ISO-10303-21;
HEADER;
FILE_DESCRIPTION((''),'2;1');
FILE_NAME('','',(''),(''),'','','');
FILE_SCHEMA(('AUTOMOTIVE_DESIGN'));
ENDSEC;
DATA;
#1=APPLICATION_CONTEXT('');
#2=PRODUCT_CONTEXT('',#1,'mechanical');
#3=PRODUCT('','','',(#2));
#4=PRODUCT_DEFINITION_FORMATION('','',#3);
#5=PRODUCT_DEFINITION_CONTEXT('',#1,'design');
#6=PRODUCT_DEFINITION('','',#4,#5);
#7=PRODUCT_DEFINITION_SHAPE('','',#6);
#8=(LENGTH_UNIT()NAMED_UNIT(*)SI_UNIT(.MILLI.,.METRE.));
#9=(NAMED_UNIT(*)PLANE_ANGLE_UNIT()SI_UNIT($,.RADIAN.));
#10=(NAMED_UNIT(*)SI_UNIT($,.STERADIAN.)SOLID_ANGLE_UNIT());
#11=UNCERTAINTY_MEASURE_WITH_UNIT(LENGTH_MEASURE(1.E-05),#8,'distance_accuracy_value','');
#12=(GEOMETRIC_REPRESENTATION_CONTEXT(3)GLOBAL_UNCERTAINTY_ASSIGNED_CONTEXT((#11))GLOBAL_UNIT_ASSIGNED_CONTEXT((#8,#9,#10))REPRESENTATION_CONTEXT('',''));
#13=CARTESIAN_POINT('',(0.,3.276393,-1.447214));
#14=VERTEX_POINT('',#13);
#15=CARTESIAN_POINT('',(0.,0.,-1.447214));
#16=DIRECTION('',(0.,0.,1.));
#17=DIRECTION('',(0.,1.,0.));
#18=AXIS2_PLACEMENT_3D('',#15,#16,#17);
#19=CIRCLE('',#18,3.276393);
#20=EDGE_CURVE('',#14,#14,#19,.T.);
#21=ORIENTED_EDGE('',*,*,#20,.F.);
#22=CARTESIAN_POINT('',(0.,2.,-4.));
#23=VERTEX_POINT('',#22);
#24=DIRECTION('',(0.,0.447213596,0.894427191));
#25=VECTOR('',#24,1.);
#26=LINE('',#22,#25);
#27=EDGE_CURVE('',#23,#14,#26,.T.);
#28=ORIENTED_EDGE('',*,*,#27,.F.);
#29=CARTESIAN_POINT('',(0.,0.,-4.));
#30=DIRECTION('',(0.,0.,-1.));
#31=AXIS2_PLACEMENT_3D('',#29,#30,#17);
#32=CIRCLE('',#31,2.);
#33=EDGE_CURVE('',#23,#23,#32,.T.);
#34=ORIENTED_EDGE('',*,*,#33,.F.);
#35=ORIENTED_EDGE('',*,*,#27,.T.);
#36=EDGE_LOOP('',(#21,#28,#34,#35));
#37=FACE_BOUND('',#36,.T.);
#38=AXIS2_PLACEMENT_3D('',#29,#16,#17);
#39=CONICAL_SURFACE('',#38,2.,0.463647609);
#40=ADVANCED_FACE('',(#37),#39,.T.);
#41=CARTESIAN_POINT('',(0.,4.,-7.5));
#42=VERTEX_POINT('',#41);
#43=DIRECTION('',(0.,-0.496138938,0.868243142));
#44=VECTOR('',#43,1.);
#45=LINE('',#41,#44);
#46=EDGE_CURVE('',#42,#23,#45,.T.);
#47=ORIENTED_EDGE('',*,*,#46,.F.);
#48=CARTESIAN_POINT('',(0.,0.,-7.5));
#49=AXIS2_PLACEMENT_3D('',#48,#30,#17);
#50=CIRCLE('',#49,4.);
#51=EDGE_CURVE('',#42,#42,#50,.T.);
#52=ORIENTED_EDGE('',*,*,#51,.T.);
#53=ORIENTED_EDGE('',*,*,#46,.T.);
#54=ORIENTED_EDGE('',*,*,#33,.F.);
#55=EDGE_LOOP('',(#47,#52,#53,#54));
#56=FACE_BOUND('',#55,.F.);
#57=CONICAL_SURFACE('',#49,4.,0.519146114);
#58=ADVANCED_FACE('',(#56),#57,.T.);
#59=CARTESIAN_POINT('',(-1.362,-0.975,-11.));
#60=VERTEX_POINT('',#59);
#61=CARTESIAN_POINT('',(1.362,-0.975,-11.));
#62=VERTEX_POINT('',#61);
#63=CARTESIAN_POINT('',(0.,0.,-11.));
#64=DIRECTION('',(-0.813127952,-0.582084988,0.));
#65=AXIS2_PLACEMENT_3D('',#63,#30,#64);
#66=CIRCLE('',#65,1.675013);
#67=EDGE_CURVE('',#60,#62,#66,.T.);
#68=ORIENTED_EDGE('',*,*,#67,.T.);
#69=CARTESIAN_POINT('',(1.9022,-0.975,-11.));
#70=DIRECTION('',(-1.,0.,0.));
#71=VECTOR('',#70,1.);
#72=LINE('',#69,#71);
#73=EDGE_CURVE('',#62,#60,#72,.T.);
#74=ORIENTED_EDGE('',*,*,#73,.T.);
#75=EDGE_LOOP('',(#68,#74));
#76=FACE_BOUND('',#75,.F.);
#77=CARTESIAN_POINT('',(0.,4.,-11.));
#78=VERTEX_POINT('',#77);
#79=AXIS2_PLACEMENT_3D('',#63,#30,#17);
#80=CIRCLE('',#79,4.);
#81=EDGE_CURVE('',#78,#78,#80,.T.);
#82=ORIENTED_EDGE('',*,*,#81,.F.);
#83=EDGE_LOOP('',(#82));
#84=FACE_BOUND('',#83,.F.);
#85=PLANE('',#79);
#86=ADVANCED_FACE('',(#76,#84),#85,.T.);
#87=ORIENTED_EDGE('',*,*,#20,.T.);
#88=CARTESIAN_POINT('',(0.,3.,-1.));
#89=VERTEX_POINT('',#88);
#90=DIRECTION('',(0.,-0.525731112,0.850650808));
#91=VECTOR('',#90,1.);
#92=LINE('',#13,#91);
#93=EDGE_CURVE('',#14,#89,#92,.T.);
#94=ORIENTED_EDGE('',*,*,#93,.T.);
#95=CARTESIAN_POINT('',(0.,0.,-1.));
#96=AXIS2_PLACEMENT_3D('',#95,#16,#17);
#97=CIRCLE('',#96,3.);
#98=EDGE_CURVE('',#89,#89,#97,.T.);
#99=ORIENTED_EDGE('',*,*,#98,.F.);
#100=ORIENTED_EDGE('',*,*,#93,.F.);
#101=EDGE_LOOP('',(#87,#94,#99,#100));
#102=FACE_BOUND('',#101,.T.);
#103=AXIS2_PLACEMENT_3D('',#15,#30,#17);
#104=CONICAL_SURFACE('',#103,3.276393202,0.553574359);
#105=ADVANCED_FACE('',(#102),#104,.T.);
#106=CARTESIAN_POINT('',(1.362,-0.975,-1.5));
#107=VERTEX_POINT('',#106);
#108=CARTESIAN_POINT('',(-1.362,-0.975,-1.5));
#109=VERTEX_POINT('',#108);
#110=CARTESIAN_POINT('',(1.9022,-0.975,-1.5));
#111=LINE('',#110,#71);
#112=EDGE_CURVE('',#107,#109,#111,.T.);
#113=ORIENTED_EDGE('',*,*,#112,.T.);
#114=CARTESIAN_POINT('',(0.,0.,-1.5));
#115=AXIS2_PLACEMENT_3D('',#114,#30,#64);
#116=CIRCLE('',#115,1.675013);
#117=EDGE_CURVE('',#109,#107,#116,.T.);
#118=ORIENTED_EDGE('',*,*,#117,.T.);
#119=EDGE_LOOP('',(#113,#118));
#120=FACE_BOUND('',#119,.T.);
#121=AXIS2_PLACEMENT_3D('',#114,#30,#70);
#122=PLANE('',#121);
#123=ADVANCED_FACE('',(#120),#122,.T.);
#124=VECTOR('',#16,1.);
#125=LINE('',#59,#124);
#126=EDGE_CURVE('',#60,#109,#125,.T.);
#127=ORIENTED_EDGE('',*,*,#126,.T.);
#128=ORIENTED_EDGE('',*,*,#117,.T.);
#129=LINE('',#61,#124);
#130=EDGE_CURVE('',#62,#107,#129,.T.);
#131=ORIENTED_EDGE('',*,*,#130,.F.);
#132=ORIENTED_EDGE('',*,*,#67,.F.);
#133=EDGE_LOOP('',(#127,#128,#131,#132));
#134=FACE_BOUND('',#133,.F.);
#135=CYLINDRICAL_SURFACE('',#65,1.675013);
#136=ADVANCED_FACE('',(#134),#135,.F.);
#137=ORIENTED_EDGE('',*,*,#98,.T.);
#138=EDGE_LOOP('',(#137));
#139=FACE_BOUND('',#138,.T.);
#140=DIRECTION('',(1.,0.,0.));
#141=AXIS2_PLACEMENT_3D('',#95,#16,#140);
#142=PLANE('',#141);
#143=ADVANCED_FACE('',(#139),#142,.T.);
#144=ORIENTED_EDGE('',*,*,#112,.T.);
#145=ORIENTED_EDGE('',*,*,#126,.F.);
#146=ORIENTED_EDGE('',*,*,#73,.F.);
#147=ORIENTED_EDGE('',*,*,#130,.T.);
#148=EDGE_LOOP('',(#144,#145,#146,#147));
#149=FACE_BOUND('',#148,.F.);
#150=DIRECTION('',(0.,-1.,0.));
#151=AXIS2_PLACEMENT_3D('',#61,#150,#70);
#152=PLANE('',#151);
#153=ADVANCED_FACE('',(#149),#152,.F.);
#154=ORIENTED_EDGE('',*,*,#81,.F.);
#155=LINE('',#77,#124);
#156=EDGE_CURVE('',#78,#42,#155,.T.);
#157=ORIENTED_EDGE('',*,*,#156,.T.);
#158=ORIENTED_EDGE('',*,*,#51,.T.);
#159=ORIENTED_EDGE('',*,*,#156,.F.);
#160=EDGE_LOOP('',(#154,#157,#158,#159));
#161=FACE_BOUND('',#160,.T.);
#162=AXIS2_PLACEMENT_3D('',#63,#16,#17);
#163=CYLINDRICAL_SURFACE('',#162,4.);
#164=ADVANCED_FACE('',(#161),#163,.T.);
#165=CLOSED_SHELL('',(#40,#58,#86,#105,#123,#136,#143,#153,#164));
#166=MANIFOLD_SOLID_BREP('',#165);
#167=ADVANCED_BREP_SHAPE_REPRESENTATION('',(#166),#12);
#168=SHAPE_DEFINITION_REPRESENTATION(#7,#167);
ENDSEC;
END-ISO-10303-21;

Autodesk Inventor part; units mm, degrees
ref_plane "YZ Plane" through (0, 0, 0) normal (1, 0, 0) x (0, 1, 0)
ref_plane "XZ Plane" through (0, 0, 0) normal (0, 1, 0) x (-1, 0, 0)
ref_plane "XY Plane" through (0, 0, 0) normal (0, 0, 1) x (1, 0, 0)
sketch "Sketch1" plane through (0, 0, 0) normal (1, 0, 0) x (0, 1, 0)
  line L0 (0, 0) -> (4, 0)
  line L1 (0, 0) -> (0, -11)
  line L2 (0, -11) -> (4, -11)
  line L3 (4, -11) -> (4, -7.5)
  line L4 (2, -4) -> (4, 0)
  line L5 (4, -7.5) -> (2, -4)
  line L6 (4, -7.5) -> (4, -7.5)
  dimension "d1" = 11
  dimension "d2" = 4
  dimension "d3" = 3.5
  dimension "d11" = 4
  dimension "d12" = 2
  dimension "d13" = 4
  dimension "d14" = 0
  dimension "d15" = 3.5
revolve "Revolution1" add sketch "Sketch1" angle 360 about axis through (0, 0, 0) along (0, 0, -1)
sketch "Sketch2" plane through (0, 0, -11) normal (0, 0, -1) x (-1, 0, 0)
  arc A0 (1.362, -0.975) -> (-1.362, -0.975) centre (0, 0) ccw
  line L0 (-1.9022, -0.975) -> (1.9927, -0.975)
  dimension "d7" = 3.35
  dimension "d8" = 2.65
extrude "Extrusion1" cut sketch "Sketch2" against normal blind 9.5
sketch "Sketch3" plane through (0, 0, 0) normal (0, 0, 1) x (1, 0, 0)
  circle A0 centre (0, 0) radius 4 projected
  point P0 (0, 0)
extrude "Extrusion2" cut sketch "Sketch3" against normal blind 1
chamfer "Chamfer1" distance 0.5 angle 45 1 edges at (0, -3.5, -1)
properties part number "drive-pulley"
